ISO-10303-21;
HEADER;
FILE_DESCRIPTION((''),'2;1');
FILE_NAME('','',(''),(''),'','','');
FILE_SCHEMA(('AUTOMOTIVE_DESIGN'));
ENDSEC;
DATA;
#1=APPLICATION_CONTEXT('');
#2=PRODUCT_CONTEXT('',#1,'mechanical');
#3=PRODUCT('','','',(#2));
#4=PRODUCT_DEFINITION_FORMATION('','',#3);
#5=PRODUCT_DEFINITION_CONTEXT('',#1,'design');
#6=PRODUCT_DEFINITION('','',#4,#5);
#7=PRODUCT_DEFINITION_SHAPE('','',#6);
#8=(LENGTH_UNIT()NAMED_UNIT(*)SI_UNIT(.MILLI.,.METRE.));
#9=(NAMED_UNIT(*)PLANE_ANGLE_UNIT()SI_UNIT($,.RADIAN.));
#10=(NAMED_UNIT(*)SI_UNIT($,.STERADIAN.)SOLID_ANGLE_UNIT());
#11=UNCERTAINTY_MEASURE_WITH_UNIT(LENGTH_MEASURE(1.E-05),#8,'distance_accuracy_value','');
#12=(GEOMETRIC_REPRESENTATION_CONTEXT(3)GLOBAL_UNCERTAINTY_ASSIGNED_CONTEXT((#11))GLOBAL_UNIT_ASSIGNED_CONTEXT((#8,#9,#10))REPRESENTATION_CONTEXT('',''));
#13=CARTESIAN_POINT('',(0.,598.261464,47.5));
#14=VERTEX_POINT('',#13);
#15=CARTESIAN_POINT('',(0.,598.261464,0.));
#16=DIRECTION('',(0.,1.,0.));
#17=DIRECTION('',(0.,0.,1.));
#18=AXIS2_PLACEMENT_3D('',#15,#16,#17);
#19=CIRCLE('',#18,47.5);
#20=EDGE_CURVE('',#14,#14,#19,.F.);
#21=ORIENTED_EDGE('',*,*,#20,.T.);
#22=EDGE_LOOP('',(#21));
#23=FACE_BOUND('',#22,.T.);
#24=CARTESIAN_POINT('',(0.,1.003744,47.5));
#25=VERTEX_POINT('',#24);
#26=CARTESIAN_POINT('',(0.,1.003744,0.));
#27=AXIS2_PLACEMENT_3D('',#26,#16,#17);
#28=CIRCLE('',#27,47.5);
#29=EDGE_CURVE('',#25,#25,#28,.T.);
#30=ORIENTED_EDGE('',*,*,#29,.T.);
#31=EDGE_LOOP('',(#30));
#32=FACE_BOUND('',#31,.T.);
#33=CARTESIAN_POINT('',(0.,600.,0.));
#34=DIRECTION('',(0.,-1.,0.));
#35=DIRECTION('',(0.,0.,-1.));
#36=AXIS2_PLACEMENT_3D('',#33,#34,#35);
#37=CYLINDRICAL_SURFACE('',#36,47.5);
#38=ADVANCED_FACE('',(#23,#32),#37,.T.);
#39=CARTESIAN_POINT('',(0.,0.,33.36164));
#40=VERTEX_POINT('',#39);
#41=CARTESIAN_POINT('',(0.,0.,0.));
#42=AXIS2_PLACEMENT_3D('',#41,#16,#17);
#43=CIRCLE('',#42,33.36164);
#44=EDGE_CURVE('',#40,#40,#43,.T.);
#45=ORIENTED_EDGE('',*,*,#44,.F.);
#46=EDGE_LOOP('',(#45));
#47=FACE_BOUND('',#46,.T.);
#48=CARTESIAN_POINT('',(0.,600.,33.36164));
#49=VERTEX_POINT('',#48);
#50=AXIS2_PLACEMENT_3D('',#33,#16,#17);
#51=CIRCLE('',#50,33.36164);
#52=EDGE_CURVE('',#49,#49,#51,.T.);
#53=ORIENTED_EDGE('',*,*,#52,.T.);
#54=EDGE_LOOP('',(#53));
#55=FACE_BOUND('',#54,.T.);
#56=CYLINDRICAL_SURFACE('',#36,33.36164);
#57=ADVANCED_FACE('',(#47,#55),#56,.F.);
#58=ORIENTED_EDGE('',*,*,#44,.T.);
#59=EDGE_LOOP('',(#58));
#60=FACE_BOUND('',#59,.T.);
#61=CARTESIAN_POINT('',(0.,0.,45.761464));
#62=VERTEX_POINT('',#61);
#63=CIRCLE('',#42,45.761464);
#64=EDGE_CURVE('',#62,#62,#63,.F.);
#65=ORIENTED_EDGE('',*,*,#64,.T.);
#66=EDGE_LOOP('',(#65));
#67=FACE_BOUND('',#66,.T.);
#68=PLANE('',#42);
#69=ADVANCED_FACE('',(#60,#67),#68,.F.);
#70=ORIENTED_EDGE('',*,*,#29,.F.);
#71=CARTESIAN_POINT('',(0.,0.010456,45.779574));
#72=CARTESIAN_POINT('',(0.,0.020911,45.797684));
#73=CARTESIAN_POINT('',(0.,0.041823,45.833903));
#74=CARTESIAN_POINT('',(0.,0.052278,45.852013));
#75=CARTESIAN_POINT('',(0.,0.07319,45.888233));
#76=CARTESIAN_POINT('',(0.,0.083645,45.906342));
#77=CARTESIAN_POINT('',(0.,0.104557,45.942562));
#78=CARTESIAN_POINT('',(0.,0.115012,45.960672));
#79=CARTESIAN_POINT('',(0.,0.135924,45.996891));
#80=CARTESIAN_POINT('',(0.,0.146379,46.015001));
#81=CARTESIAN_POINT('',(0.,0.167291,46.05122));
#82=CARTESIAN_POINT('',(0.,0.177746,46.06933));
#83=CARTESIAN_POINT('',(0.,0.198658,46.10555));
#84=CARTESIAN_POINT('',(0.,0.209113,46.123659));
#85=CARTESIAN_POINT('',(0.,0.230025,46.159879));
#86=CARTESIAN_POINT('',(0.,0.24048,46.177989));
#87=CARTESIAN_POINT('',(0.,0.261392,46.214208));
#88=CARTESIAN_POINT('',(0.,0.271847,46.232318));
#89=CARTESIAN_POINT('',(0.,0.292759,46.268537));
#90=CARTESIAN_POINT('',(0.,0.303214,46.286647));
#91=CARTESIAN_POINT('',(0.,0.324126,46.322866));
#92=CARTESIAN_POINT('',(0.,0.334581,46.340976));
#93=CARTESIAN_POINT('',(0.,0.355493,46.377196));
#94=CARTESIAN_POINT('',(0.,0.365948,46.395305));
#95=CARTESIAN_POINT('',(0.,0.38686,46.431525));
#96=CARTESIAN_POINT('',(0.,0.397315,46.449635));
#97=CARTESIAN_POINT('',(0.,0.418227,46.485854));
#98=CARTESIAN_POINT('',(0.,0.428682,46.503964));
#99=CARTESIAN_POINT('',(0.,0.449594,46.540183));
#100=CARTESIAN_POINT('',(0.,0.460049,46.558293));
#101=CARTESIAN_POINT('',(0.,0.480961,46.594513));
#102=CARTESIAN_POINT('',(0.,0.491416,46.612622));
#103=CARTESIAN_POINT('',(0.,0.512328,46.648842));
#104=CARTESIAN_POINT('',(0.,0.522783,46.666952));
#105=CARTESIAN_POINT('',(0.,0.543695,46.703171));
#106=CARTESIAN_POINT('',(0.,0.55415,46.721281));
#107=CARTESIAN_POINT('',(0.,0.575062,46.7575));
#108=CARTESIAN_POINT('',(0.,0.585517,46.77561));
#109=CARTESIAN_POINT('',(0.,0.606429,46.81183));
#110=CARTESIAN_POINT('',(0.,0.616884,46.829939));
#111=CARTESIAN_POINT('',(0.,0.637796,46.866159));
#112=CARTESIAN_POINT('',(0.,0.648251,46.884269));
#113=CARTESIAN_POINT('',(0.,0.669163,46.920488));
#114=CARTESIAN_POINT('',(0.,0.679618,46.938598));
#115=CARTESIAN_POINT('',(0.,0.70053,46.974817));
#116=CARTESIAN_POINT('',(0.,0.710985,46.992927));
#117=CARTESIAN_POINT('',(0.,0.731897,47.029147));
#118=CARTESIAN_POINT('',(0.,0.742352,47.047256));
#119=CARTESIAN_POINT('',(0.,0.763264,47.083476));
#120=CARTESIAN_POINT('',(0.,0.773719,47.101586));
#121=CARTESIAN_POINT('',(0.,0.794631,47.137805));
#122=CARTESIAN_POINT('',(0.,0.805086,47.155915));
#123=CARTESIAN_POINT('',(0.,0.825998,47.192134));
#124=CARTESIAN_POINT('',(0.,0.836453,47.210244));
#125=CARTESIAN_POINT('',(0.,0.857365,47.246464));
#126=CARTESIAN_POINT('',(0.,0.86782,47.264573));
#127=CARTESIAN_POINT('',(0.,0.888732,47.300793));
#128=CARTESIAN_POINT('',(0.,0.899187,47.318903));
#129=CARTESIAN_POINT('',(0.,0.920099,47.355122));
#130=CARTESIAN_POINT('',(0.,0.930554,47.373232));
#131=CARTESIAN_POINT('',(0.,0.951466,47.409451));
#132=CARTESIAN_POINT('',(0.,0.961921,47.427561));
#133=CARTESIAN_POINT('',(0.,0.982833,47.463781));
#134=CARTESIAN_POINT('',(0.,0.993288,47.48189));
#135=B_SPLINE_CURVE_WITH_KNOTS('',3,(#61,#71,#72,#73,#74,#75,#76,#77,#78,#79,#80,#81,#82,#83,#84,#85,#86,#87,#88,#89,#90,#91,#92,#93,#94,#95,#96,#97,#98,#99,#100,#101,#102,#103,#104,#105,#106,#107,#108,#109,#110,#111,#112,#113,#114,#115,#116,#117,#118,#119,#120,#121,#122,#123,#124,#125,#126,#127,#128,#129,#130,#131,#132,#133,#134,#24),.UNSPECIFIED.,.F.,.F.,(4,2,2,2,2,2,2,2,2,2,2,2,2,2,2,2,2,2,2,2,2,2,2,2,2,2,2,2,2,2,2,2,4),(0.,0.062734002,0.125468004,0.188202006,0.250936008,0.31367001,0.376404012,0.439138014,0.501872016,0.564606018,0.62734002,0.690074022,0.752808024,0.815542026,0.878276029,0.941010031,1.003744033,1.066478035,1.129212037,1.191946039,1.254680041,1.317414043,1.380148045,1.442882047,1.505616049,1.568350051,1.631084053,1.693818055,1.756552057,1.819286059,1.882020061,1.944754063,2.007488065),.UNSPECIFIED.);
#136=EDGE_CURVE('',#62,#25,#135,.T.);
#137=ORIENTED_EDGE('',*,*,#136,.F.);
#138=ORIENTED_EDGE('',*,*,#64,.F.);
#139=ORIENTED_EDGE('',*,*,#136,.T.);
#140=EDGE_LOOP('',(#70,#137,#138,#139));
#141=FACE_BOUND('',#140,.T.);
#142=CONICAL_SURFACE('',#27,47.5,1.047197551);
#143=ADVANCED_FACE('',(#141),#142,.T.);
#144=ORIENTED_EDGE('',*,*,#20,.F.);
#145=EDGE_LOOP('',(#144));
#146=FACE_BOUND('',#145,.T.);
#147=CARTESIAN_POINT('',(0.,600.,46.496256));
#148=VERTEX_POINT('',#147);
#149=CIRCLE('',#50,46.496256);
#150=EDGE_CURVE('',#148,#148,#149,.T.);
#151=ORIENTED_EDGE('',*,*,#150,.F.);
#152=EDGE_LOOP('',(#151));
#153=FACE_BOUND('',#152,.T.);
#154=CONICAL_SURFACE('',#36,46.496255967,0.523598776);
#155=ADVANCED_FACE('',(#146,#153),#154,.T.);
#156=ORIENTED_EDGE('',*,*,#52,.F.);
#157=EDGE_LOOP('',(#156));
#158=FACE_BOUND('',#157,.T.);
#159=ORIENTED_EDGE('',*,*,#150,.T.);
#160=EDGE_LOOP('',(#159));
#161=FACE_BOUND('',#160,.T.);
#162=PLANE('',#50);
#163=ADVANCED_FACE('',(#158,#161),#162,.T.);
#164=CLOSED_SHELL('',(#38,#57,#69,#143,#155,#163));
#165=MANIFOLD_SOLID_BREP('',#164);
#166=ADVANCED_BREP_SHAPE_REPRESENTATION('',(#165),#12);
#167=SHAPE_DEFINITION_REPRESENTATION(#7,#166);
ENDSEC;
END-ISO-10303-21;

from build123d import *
from OCP.BRepFilletAPI import BRepFilletAPI_MakeChamfer

# Parameters (mm, degrees)
SKETCH1_R           = 47.5
BOSS_EXTRUDE1_DEPTH = 600
SKETCH2_R           = 33.361640255
CUT_EXTRUDE1_DEPTH  = 604.748706003
CHAMFER1_SIZE       = 1.738535662
CHAMFER1_SIZE2      = 1.003744033


with BuildPart() as part:
    # Sketch1 → Boss-Extrude1 (new body)
    with BuildSketch(Plane(origin=(0, 0, 0), x_dir=(1, 0, 0), z_dir=(0, 1, 0))):
        Circle(SKETCH1_R)
    extrude(amount=BOSS_EXTRUDE1_DEPTH)

    # Sketch2 → Cut-Extrude1 (cut, through all)
    with BuildSketch(Plane(origin=(0, 0, 0), x_dir=(1, 0, 0), z_dir=(0, 1, 0))):
        Circle(SKETCH2_R)
    extrude(amount=CUT_EXTRUDE1_DEPTH, mode=Mode.SUBTRACT)

    # Chamfer1: one chamfer whose edges measure the first distance from different faces: ONE call of the kernel's chamfer builder (chamfer() names one face for all edges)
    chamfer1_edges_1 = [part.edges().sort_by_distance(p)[0] for p in [
        (-47.5, 600, 0),
    ]]
    chamfer1_side_1 = [part.faces().sort_by_distance(p)[0] for p in [
        (-47.5, 300, 0),
    ]]
    chamfer1_edges_2 = [part.edges().sort_by_distance(p)[0] for p in [
        (-47.5, 0, 0),
    ]]
    chamfer1_side_2 = [part.faces().sort_by_distance(p)[0] for p in [
        (-46.156497116, 0, 0),
    ]]
    chamfer1 = BRepFilletAPI_MakeChamfer(part.part.solid().wrapped)
    for e in chamfer1_edges_1:
        chamfer1.Add(CHAMFER1_SIZE, CHAMFER1_SIZE2, e.wrapped, chamfer1_side_1[0].wrapped)  # the first distance lies on this face
    for e in chamfer1_edges_2:
        chamfer1.Add(CHAMFER1_SIZE, CHAMFER1_SIZE2, e.wrapped, chamfer1_side_2[0].wrapped)  # the first distance lies on this face
    add(Compound.cast(chamfer1.Shape()), mode=Mode.REPLACE)


solid = part.part
